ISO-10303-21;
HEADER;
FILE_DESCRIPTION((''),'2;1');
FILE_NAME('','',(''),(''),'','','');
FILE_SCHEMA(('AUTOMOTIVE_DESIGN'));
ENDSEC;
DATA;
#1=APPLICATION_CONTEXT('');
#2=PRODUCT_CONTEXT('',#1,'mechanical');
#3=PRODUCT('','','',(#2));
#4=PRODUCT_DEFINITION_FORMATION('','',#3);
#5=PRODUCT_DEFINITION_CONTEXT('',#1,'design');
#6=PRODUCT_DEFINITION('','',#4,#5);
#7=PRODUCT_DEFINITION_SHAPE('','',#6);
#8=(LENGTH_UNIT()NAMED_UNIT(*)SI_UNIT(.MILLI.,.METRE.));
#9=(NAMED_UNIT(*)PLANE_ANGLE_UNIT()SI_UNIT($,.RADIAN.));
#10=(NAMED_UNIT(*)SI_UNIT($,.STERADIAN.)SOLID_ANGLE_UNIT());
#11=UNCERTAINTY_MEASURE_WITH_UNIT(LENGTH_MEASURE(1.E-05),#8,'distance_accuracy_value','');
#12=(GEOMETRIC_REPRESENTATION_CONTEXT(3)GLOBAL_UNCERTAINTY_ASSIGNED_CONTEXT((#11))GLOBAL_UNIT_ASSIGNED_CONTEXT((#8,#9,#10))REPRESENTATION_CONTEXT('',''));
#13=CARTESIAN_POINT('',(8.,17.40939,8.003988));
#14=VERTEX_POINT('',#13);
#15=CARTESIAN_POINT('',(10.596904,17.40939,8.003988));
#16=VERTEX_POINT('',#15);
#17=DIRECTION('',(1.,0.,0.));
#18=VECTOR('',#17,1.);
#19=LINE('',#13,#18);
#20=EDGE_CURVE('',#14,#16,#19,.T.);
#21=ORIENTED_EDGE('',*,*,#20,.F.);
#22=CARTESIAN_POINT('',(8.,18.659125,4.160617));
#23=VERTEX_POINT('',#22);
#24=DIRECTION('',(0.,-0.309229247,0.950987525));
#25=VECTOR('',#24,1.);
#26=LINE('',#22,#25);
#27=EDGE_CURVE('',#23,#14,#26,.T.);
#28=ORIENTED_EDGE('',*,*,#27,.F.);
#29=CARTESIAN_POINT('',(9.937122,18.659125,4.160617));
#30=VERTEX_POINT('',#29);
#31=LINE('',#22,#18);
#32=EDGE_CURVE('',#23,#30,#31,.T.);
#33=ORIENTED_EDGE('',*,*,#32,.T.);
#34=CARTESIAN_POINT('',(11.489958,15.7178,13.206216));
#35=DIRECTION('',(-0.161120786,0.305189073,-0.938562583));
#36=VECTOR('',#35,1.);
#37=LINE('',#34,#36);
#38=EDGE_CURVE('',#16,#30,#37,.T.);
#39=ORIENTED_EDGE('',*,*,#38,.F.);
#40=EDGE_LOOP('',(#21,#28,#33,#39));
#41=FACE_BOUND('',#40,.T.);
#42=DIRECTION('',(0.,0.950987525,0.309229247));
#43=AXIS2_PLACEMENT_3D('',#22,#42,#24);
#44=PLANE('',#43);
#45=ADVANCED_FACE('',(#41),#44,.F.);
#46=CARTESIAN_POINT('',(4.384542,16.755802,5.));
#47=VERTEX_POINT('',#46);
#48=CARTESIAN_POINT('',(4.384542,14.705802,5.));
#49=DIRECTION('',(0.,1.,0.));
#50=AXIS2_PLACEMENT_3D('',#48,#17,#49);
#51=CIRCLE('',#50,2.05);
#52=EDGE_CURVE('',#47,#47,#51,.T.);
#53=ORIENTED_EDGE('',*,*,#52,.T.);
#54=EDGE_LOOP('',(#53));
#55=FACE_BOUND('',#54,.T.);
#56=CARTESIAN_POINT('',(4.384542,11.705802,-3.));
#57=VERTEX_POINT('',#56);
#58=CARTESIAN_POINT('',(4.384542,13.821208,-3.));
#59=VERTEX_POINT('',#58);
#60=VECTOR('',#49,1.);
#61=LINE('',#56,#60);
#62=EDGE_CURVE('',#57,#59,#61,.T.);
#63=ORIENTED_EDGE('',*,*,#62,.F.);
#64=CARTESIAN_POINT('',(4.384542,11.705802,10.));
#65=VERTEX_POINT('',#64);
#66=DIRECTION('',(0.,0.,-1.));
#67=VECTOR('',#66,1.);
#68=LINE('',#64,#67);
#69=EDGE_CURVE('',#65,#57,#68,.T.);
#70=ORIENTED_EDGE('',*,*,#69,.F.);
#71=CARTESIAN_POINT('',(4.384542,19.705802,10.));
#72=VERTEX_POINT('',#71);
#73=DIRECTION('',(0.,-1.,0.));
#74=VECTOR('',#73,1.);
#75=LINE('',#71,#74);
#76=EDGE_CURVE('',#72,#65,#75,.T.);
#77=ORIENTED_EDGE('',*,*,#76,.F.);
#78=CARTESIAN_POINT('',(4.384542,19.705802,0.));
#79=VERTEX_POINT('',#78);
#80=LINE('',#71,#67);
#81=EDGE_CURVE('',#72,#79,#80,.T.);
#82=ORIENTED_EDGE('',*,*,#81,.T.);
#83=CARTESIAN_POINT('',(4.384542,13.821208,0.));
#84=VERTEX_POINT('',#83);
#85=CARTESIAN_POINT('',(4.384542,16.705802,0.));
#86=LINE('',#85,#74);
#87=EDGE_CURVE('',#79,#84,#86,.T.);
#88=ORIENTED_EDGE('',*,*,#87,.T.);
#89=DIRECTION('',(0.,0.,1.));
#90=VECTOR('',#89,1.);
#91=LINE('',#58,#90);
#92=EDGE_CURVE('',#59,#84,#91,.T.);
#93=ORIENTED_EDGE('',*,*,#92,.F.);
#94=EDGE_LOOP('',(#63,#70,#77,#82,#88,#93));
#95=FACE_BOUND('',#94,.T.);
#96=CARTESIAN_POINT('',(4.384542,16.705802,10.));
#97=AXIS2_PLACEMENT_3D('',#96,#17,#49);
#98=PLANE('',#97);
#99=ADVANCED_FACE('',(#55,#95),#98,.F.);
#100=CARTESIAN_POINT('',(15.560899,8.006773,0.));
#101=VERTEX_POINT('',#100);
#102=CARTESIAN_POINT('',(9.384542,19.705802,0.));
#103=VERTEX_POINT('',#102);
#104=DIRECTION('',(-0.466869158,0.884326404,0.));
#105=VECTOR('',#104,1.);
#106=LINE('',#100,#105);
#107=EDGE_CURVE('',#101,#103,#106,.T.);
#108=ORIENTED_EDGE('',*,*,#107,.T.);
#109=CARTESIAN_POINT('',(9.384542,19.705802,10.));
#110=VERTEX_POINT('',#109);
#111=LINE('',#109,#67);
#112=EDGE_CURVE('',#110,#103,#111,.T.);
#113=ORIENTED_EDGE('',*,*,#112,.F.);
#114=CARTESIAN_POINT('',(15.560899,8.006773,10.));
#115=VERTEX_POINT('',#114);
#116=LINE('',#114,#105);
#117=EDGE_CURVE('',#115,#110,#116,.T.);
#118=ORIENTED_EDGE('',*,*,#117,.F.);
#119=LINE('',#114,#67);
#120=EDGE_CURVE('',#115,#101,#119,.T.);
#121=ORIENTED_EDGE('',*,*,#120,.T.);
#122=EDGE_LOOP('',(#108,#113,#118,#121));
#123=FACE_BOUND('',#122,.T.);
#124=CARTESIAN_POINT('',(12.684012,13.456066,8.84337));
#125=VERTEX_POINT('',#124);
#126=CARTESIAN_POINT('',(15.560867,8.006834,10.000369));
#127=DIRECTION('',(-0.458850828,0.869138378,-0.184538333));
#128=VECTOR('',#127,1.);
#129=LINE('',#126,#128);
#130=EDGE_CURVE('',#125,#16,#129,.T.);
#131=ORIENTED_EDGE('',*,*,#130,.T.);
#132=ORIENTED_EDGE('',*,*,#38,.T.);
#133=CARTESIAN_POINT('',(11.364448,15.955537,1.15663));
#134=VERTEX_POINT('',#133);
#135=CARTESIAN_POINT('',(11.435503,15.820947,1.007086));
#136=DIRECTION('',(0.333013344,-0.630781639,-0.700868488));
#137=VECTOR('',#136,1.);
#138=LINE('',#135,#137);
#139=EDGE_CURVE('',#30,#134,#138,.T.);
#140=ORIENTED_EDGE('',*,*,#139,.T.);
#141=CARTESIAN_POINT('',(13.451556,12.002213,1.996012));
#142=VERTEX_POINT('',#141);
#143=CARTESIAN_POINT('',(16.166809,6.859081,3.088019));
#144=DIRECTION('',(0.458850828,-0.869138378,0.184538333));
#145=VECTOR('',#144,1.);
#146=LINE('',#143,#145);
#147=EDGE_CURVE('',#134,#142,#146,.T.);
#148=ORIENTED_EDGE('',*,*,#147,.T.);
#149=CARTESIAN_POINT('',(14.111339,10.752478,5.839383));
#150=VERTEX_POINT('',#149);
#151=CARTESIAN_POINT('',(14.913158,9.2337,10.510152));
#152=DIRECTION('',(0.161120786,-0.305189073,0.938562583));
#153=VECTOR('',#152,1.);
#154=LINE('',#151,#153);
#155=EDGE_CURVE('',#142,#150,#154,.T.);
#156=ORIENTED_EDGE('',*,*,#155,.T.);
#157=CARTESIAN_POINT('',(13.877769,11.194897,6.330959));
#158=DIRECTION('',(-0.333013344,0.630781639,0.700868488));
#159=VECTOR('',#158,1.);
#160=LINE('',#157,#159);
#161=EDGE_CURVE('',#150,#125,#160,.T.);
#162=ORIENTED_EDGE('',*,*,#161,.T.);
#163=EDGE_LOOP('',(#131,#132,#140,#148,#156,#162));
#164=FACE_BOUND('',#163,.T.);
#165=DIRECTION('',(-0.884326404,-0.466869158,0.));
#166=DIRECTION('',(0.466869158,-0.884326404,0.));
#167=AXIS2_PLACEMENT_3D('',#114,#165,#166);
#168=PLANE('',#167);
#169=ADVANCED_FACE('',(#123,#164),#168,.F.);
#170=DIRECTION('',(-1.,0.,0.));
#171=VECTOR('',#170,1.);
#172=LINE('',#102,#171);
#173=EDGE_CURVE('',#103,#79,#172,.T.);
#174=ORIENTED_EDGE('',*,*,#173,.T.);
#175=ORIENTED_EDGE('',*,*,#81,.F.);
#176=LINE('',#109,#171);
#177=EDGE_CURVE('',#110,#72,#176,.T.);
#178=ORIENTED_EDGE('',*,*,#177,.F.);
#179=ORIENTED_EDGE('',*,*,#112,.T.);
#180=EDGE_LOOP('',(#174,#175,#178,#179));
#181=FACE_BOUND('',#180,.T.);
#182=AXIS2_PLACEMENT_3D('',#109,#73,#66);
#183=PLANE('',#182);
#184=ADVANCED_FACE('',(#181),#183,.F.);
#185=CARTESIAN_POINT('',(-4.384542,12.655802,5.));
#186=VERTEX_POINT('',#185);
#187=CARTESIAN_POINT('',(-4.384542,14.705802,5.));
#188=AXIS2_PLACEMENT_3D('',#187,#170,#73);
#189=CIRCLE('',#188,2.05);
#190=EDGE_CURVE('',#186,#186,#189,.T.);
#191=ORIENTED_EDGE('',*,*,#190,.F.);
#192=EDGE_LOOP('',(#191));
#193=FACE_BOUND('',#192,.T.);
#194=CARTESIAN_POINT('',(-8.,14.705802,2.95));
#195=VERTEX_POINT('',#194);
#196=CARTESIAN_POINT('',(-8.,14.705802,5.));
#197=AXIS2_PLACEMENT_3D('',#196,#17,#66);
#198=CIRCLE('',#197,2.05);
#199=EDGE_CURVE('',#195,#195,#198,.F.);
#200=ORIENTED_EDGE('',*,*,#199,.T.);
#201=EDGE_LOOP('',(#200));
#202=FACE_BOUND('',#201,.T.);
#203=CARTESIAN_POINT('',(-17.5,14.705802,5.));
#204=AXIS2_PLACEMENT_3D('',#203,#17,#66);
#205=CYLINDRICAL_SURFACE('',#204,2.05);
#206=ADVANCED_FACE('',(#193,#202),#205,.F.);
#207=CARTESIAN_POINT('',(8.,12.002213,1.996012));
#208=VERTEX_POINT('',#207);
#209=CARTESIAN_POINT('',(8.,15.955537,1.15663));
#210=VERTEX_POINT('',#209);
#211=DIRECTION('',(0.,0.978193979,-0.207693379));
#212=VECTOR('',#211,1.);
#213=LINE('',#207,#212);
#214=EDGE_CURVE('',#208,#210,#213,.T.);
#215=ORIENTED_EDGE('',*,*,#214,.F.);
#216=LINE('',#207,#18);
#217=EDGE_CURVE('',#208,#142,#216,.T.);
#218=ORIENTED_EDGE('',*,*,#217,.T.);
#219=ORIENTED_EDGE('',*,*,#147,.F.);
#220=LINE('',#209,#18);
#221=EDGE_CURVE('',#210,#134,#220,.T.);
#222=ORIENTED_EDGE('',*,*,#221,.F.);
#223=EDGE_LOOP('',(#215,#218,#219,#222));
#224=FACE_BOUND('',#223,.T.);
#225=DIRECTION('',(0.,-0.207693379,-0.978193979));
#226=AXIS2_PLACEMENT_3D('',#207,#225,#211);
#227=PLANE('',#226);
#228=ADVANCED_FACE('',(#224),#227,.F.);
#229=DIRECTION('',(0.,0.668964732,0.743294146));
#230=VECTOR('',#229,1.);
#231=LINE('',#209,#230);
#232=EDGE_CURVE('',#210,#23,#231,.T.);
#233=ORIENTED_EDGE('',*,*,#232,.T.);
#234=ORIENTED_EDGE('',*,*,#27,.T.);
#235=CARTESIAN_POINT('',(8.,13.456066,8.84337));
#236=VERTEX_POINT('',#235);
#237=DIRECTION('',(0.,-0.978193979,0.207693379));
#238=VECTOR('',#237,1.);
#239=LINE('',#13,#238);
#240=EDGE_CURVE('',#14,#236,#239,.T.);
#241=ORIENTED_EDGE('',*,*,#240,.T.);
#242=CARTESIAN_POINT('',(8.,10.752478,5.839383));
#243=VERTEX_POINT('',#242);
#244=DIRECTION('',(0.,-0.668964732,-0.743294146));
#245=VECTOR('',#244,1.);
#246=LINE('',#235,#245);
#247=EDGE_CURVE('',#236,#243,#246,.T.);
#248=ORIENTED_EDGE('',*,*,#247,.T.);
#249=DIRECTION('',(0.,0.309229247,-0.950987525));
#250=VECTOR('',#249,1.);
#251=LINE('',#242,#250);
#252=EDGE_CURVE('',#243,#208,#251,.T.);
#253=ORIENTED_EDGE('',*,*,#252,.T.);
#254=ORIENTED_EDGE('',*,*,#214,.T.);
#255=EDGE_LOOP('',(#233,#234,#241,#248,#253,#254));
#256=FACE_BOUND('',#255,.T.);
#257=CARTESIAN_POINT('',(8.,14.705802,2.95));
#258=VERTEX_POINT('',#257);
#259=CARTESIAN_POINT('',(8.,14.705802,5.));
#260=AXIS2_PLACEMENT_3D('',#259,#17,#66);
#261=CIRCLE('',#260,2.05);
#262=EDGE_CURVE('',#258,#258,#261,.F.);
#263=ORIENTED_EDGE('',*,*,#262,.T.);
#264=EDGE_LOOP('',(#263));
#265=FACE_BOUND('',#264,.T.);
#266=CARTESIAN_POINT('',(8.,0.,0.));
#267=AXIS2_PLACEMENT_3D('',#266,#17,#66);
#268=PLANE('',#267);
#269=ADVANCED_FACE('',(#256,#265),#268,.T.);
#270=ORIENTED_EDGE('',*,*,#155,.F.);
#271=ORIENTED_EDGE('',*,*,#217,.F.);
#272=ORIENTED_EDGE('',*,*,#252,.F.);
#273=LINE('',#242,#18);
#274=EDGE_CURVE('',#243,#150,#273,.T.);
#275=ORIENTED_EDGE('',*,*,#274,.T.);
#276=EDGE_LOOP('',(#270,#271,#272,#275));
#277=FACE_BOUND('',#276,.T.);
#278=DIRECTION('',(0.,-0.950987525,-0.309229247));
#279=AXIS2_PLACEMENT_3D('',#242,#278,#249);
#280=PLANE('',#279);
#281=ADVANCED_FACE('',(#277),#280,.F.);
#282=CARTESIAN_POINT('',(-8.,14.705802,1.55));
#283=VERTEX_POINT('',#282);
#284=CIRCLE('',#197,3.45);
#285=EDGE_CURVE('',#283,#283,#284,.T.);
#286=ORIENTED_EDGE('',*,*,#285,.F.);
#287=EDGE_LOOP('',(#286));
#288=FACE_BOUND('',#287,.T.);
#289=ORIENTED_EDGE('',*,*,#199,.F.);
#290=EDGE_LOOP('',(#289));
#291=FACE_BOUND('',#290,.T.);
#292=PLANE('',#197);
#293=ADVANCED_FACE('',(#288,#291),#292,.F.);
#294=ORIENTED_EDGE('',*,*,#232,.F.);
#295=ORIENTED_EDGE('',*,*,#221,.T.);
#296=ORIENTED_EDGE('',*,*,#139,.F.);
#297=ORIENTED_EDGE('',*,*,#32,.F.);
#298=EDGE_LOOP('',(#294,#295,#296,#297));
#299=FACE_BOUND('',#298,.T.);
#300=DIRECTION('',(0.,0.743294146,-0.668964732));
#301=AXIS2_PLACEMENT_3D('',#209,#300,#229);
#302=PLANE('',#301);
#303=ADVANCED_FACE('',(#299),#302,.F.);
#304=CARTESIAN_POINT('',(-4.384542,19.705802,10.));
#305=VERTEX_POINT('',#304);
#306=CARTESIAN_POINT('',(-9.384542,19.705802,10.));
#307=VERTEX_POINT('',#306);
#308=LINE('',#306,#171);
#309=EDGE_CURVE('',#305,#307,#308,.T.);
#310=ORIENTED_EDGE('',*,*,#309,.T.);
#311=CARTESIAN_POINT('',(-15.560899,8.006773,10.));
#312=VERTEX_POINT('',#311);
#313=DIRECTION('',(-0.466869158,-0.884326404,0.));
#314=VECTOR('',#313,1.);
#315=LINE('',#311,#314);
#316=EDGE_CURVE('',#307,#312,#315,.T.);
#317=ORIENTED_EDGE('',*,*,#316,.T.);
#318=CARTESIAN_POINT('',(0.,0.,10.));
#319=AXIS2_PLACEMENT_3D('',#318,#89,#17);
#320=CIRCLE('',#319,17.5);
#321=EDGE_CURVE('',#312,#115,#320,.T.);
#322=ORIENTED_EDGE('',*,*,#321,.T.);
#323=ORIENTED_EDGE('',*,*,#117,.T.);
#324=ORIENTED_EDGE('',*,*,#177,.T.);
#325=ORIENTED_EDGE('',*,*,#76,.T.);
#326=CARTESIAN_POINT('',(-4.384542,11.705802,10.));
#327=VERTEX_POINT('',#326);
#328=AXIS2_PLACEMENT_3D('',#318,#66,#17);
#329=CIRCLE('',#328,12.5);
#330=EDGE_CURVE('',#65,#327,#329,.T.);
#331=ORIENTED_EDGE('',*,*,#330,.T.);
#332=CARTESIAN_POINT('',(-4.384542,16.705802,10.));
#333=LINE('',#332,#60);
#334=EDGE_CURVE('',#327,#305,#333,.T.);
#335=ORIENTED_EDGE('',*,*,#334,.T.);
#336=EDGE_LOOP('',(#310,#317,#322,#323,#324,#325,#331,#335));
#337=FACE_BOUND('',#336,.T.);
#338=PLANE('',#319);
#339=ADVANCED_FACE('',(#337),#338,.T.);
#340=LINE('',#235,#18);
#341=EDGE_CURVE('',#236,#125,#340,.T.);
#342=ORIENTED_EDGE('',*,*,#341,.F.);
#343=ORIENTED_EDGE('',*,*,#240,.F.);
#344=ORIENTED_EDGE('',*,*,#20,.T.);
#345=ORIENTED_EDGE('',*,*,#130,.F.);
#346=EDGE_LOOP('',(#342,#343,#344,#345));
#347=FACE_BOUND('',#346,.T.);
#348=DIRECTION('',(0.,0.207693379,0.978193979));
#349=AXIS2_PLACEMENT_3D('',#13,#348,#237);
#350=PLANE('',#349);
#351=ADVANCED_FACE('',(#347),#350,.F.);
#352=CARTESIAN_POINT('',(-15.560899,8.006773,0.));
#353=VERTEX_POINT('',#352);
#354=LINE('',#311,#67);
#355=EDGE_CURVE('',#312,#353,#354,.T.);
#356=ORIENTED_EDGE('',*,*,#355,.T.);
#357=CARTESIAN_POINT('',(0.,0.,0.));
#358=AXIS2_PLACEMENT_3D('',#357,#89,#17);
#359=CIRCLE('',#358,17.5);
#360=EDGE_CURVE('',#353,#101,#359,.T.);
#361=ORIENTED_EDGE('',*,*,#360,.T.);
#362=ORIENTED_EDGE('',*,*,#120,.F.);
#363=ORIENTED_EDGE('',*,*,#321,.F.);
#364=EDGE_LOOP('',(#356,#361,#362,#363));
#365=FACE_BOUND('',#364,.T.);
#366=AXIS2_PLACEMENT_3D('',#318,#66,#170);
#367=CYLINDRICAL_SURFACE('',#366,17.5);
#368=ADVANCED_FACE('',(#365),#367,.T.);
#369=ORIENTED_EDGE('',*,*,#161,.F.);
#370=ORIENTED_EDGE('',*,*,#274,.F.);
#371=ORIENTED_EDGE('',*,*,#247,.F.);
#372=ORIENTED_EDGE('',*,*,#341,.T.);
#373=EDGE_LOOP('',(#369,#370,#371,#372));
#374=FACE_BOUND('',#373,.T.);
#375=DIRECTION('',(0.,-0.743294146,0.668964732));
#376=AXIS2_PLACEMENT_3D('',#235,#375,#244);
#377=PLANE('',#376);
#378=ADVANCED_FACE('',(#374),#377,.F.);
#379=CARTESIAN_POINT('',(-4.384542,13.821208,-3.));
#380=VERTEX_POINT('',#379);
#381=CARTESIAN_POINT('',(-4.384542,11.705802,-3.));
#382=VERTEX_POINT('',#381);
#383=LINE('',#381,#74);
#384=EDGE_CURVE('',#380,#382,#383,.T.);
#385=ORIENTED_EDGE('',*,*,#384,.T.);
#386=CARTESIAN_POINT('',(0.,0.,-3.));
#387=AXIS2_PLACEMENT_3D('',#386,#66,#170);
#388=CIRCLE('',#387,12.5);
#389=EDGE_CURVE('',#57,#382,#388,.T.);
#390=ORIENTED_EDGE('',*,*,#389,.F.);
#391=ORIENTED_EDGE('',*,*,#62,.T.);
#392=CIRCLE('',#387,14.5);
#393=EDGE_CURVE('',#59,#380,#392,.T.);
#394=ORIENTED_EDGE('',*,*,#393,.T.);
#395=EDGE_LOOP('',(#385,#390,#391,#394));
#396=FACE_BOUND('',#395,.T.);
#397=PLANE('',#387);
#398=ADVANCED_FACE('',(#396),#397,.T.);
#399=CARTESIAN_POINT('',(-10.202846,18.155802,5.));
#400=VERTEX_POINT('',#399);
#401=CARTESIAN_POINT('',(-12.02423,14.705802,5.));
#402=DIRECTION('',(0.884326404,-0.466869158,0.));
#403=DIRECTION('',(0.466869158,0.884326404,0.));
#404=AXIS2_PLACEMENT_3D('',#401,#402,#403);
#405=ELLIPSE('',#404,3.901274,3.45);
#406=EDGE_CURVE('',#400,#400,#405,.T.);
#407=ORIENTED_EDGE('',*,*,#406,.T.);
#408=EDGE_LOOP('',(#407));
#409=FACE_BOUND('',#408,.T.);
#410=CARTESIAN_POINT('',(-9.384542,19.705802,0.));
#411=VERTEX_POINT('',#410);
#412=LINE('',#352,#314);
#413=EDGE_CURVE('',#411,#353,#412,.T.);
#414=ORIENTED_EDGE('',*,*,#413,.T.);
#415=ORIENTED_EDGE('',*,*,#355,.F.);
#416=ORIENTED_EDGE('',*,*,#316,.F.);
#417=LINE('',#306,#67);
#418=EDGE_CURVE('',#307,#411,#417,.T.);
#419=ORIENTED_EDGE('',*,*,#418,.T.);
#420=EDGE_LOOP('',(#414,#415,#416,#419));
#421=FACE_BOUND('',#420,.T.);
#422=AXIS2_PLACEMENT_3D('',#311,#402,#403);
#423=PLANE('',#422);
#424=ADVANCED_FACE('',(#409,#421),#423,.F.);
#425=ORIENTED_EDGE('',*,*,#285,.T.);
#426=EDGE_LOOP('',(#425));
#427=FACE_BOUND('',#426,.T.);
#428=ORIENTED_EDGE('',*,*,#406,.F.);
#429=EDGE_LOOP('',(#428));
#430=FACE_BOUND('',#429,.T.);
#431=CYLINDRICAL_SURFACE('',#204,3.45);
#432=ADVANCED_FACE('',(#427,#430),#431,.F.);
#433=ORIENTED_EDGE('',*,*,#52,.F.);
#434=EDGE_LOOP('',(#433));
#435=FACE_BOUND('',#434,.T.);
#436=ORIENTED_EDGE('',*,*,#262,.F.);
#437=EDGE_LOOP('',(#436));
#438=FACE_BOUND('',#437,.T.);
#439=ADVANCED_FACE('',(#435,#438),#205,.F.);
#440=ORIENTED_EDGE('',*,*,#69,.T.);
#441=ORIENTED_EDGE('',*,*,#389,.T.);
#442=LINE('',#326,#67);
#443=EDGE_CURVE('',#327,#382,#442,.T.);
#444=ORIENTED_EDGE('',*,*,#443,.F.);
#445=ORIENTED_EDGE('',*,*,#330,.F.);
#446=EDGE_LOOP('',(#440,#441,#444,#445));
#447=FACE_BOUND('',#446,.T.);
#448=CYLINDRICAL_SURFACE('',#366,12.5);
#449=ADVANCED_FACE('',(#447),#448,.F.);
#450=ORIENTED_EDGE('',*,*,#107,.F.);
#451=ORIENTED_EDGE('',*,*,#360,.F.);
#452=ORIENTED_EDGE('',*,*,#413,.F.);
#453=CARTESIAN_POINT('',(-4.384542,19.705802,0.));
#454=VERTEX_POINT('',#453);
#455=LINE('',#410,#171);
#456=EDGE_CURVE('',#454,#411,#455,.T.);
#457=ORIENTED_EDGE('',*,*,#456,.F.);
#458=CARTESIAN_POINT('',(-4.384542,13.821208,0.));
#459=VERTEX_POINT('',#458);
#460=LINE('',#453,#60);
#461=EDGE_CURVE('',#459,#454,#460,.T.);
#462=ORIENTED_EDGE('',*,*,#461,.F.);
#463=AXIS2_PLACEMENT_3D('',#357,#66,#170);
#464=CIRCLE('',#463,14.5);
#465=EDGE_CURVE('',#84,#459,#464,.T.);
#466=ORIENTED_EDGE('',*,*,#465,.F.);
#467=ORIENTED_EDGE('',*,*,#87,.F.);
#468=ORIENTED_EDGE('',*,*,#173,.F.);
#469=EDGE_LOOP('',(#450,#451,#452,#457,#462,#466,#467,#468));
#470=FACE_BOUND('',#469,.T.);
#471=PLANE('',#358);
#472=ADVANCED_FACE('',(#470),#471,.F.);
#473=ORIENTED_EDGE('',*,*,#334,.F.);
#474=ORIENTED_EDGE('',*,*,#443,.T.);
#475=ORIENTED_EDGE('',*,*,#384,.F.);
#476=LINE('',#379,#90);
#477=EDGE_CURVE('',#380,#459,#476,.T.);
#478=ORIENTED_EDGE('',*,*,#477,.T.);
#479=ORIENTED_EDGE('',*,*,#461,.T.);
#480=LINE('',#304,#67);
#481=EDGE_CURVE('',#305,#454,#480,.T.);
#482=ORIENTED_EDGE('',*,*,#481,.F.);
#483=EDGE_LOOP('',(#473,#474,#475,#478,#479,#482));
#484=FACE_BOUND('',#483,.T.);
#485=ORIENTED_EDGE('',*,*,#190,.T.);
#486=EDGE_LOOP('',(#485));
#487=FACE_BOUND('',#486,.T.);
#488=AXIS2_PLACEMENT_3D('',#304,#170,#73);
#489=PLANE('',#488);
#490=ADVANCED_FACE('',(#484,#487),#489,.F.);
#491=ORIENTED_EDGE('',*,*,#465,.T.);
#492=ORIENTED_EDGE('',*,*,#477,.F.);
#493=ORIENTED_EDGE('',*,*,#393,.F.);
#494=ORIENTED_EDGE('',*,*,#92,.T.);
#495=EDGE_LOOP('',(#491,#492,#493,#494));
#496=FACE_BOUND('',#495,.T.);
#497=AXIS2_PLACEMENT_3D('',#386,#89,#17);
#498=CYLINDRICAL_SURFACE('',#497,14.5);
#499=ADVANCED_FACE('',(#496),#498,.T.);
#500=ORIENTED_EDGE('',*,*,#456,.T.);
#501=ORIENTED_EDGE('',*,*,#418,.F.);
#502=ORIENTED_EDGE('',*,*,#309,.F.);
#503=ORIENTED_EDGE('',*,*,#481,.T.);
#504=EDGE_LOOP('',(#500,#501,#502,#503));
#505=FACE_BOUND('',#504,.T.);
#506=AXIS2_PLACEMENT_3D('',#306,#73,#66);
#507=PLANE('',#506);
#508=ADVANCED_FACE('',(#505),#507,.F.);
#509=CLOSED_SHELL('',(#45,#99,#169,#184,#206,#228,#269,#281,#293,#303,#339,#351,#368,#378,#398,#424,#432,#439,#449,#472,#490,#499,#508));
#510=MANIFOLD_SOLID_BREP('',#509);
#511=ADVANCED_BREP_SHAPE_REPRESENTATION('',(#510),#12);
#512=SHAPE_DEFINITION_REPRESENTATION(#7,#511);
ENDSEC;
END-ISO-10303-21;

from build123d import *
from build123d.topology import SkipClean

# Parameters (mm, degrees)
BOSS_EXTRUDE1_DEPTH     = 10
CUT_EXTRUDE1_DEPTH      = 29.188093475
CUT_EXTRUDE1_DEPTH_BACK = 29.188093475
SKETCH4_R               = 2.05
CUT_EXTRUDE2_OUTLINE_W  = 1.4
CUT_EXTRUDE2_OUTLINE_H  = 5.870544518
CUT_EXTRUDE3_START      = 20
CUT_EXTRUDE3_DEPTH      = 12
BOSS_EXTRUDE2_START     = 3
SKETCH8_R               = 14.5
SKETCH8_R_2             = 12.5
BOSS_EXTRUDE2_DEPTH     = 3
CUT_EXTRUDE7_DEPTH      = 3


# Read off the part's stored shape, not the designer's step: Cut-Extrude2
with BuildPart() as part:
    # Sketch1 → Boss-Extrude1 (new body)
    with BuildSketch(Plane.XY):
        with BuildLine():
            Line((-15.560899439, 8.006772674), (-9.384542241, 19.705801525))
            Line((-9.384542241, 19.705801525), (-4.384542241, 19.705801525))
            Line((-4.384542241, 19.705801525), (-4.384542241, 16.705801525))
            Line((-4.384542241, 16.705801525), (-4.384542241, 11.705801525))
            ThreePointArc((-4.384542241, 11.705801525), (0, -12.5), (4.384542241, 11.705801525))
            Line((4.384542241, 11.705801525), (4.384542241, 16.705801525))
            Line((4.384542241, 16.705801525), (4.384542241, 19.705801525))
            Line((4.384542241, 19.705801525), (9.384542241, 19.705801525))
            Line((9.384542241, 19.705801525), (15.560899439, 8.006772674))
            ThreePointArc((15.560899439, 8.006772674), (0, -17.5), (-15.560899439, 8.006772674))
        make_face()
    extrude(amount=BOSS_EXTRUDE1_DEPTH)

    # Sketch4 → Cut-Extrude1 (cut, two sides: drawn at the far end of the back side and taken through both)
    with BuildSketch(Plane(origin=(0, 0, 0), x_dir=(0, 0, -1), z_dir=(1, 0, 0)).offset(-CUT_EXTRUDE1_DEPTH_BACK)):
        with Locations(Location((-5, 14.705801525, 0), (0, 0, 90))):
            Circle(SKETCH4_R)
    extrude(amount=CUT_EXTRUDE1_DEPTH + CUT_EXTRUDE1_DEPTH_BACK, mode=Mode.SUBTRACT)

    # Cut-Extrude2 outline → Cut-Extrude2 (revolve, cut)
    with BuildSketch(Plane(origin=(0, 14.705801525, 5), x_dir=(0, 1, 0), z_dir=(0, 0, -1))):
        with Locations((2.75, -10.935272259)):
            Rectangle(CUT_EXTRUDE2_OUTLINE_W, CUT_EXTRUDE2_OUTLINE_H)
    revolve(axis=Axis((0, 14.705801525, 5), (1, 0, 0)), mode=Mode.SUBTRACT)

    # Sketch6 → Cut-Extrude3 (cut)
    with BuildSketch(Plane(origin=(0, 0, 0), x_dir=(0, 0, -1), z_dir=(1, 0, 0)).offset(CUT_EXTRUDE3_START)):
        Polygon((-1.996012472, 12.00221275), (-1.156629675, 15.955536649), (-4.160617203, 18.659125424), (-8.003987528, 17.4093903), (-8.843370325, 13.456066401), (-5.839382797, 10.752477625), align=None)
    extrude(amount=-CUT_EXTRUDE3_DEPTH, mode=Mode.SUBTRACT)

    # Sketch8 → Boss-Extrude2 (add)
    with SkipClean():  # the faces are left unmerged after this step: merging them gives an invalid solid
        with BuildSketch(Plane(origin=(0, 0, 0), x_dir=(-1, 0, 0), z_dir=(0, 0, -1)).offset(BOSS_EXTRUDE2_START)):
            with Locations(Location((0, 0, 0), (0, 0, 107.600741317))):
                Circle(SKETCH8_R)
            Circle(SKETCH8_R_2, mode=Mode.SUBTRACT)
        extrude(amount=-BOSS_EXTRUDE2_DEPTH)

    # Sketch9 → Cut-Extrude7 (cut)
    with BuildSketch(Plane.XY):
        Polygon((-4.384542241, 11.705801525), (-4.384542241, 13.821207955), (0.563137908, 18.768888104), (4.384542241, 13.821207955), (4.384542241, 11.705801525), align=None)
    extrude(amount=-CUT_EXTRUDE7_DEPTH, mode=Mode.SUBTRACT)


solid = part.part
